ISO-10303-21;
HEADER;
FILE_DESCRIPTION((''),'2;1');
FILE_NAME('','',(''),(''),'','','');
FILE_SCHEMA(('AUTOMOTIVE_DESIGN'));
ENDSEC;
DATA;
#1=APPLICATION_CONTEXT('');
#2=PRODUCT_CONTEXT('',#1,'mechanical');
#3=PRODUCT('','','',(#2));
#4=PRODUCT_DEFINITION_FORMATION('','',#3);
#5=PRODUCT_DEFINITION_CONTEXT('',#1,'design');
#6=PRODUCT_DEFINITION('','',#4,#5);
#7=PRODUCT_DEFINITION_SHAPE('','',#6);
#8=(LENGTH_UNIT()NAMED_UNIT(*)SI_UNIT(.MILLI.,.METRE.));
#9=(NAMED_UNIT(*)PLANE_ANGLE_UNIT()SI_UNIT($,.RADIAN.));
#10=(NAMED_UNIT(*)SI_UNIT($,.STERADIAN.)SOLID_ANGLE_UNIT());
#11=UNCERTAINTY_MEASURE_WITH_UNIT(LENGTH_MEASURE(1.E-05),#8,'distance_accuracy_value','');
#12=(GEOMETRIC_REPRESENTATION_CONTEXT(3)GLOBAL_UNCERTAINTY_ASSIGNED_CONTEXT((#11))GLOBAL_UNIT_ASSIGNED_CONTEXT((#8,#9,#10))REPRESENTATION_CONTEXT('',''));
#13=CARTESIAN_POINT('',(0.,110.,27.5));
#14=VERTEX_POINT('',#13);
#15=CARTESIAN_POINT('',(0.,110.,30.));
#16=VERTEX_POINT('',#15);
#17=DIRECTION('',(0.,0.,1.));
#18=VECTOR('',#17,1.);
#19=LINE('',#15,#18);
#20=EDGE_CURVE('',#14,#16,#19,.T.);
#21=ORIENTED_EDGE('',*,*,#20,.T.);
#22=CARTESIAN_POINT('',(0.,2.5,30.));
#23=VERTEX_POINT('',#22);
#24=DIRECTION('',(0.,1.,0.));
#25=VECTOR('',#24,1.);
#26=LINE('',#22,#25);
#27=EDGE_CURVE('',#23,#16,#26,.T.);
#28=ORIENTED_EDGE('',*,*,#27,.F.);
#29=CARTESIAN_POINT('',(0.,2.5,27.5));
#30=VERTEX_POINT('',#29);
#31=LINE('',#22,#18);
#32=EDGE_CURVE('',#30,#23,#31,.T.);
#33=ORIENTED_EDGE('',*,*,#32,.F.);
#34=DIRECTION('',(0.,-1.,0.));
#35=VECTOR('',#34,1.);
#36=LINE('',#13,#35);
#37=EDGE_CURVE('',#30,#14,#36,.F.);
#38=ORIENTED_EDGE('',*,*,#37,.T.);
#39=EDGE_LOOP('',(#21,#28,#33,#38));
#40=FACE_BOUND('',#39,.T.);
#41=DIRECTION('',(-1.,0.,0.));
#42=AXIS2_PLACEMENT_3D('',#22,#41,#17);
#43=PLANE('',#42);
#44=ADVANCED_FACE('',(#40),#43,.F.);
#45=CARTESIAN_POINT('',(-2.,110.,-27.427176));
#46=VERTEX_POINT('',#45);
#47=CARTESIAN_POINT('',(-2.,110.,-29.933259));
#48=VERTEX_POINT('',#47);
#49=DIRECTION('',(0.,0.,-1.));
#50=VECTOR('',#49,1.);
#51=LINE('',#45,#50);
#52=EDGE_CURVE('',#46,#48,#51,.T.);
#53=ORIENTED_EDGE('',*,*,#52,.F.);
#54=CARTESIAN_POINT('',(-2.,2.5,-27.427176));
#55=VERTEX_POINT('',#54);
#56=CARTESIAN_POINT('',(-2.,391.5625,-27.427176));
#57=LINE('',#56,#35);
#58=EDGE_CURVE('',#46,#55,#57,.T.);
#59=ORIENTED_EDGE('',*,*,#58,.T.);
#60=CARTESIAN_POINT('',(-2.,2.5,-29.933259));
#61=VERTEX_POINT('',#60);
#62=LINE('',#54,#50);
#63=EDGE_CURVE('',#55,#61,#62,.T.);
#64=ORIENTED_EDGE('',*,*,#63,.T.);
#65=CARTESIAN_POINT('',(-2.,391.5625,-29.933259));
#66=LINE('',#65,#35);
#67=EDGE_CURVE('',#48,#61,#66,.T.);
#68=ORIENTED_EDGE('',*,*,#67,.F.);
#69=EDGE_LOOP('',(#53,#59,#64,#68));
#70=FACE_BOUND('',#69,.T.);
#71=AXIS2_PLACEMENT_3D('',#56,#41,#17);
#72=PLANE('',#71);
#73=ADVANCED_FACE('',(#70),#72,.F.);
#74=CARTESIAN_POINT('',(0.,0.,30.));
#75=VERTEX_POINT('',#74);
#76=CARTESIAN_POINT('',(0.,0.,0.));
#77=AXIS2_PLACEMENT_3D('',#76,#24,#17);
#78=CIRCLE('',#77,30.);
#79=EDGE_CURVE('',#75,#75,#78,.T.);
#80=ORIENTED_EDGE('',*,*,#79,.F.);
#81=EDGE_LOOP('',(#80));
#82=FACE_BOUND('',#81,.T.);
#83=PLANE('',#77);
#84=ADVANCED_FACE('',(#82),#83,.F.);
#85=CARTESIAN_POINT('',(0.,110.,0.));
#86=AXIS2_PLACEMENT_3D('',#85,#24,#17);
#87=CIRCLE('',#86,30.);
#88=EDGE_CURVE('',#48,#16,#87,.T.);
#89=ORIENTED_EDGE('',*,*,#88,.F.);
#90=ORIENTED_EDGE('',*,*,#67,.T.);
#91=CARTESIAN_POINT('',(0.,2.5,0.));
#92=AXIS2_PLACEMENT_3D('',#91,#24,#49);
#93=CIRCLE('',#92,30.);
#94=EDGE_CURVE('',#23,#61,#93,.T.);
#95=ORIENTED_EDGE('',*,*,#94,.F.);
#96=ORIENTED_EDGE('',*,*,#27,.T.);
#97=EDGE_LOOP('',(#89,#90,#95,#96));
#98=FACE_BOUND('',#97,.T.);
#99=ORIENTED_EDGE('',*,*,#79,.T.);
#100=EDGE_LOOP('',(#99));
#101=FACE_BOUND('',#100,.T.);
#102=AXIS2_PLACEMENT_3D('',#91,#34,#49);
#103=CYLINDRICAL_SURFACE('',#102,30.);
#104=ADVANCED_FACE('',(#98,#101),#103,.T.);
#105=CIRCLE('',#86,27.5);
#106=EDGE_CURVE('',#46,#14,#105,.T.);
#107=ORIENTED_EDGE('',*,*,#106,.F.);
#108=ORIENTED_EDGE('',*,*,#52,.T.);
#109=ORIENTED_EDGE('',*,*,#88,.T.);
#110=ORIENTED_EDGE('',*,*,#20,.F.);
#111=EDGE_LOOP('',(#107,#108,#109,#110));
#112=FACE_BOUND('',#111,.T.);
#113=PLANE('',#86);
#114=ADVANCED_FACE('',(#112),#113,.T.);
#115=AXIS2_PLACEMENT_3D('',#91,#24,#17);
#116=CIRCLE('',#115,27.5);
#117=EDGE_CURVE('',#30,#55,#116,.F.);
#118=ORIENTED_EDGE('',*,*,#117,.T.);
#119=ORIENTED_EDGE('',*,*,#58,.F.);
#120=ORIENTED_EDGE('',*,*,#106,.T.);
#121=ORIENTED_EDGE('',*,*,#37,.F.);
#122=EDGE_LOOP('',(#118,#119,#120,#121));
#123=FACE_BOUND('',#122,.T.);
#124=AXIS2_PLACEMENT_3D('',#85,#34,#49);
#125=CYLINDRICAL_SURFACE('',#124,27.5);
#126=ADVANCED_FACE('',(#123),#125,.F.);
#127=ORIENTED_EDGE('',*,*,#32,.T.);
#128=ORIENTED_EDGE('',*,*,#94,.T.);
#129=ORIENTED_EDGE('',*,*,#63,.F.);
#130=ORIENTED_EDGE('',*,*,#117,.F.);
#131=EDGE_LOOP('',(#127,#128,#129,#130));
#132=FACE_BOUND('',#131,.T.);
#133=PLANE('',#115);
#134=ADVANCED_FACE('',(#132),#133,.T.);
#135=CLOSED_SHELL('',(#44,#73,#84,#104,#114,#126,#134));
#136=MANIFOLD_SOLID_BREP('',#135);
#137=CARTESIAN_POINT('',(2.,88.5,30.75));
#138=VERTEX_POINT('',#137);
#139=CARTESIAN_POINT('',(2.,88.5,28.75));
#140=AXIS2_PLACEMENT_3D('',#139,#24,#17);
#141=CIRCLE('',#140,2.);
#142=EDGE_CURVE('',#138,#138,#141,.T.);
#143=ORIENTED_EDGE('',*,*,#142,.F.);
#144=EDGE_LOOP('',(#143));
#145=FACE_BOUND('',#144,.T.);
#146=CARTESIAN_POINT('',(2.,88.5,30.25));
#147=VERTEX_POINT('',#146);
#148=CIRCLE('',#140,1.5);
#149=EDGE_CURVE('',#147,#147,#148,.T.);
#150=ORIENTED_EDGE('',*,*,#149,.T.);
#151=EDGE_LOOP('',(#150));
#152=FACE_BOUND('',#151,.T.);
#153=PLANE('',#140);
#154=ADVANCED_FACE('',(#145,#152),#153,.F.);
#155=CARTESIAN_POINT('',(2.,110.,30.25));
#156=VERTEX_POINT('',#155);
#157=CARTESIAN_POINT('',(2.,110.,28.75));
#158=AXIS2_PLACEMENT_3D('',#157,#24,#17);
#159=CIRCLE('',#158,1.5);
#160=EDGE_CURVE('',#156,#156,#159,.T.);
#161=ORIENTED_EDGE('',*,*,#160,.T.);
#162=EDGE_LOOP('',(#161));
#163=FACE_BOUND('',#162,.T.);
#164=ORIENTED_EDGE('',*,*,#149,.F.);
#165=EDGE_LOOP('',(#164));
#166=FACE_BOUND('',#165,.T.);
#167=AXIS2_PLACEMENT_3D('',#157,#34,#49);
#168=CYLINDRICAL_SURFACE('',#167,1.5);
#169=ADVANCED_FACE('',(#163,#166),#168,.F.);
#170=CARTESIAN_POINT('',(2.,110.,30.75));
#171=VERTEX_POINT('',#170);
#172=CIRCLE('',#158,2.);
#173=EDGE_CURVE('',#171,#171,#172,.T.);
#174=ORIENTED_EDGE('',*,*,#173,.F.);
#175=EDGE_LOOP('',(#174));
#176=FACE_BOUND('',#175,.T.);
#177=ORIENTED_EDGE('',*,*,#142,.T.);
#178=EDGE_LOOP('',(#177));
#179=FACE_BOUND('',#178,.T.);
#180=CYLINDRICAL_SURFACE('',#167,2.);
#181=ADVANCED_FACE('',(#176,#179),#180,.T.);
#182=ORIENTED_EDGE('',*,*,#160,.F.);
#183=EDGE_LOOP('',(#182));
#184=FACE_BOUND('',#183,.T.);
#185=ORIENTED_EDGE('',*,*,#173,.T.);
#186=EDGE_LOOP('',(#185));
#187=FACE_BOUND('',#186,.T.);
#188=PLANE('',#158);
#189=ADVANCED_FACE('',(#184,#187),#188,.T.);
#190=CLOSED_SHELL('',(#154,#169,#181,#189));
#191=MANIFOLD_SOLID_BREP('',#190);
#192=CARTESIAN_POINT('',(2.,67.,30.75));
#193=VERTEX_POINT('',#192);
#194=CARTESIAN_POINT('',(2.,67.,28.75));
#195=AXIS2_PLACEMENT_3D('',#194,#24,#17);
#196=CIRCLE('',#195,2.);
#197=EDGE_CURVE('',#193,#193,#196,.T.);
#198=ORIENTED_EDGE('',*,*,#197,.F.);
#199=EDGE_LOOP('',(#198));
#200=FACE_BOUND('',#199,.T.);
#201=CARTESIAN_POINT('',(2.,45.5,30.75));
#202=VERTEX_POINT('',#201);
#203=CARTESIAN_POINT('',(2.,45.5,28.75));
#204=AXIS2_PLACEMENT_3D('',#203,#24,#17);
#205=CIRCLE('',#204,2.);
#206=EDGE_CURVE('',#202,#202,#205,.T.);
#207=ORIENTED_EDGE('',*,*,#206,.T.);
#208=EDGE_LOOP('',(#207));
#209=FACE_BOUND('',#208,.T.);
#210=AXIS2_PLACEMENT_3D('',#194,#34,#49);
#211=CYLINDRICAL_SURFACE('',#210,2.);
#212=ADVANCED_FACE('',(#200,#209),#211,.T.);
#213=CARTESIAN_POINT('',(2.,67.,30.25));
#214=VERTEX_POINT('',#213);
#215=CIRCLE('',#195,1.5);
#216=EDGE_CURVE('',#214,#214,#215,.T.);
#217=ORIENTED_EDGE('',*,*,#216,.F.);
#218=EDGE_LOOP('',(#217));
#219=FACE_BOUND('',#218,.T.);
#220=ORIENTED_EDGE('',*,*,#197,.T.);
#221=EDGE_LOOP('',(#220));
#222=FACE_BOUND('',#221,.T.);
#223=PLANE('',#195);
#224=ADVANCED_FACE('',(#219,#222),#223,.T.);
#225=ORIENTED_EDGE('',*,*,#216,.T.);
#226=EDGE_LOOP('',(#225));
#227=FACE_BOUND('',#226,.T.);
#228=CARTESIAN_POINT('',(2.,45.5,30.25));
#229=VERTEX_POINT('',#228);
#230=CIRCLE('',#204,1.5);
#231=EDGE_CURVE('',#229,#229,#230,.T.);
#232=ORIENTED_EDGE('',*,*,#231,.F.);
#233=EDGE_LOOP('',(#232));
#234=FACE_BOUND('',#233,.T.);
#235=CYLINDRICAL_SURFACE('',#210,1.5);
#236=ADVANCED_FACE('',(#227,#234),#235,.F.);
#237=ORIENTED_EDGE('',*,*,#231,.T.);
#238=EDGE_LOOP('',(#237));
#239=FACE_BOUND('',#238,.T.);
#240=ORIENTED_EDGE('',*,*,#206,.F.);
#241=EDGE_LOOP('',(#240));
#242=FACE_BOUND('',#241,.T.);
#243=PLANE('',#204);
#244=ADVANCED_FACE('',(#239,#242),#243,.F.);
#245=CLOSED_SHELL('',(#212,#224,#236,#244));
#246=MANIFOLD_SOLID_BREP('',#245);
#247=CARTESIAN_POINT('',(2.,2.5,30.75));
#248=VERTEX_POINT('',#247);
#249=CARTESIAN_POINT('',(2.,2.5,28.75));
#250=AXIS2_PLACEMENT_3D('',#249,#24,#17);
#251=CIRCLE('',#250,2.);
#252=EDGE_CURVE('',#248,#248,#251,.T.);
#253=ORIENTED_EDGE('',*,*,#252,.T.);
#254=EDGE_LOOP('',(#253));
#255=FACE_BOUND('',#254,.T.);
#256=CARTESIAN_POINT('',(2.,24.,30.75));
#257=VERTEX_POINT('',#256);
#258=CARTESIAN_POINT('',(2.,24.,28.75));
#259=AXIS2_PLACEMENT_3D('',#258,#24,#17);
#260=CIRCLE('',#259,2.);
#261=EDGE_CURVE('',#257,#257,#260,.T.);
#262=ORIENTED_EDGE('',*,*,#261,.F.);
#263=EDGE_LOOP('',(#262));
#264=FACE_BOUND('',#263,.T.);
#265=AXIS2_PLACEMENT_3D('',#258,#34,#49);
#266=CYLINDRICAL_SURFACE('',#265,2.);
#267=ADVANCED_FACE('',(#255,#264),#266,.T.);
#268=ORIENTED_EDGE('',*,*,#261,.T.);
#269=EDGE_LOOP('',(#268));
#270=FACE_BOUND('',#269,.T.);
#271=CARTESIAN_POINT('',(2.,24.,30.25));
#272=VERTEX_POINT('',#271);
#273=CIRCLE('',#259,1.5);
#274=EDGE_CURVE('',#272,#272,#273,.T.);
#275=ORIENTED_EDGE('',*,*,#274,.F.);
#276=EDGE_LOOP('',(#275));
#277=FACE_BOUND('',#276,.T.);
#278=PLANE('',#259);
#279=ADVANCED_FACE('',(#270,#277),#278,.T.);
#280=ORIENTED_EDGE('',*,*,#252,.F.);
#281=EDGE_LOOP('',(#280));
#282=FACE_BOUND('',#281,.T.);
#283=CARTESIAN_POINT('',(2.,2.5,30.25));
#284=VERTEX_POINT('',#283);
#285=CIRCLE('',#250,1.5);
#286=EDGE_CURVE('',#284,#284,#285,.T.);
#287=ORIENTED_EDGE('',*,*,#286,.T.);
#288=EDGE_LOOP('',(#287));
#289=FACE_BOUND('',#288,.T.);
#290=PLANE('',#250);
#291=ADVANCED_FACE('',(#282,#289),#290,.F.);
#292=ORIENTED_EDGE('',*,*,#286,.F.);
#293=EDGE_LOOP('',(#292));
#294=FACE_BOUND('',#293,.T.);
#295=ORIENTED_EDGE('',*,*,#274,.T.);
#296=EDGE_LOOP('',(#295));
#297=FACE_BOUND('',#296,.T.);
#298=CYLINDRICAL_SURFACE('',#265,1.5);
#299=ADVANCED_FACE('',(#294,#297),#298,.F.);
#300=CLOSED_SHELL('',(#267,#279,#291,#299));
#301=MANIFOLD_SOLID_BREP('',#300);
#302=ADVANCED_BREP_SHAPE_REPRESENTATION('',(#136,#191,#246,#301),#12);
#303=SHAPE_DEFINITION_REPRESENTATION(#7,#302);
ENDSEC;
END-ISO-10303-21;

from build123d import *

# Parameters (mm, degrees)
SKETCH1_R           = 30
BOSS_EXTRUDE1_DEPTH = 2.5
SKETCH2_R           = 30
SKETCH2_R_2         = 27.5
BOSS_EXTRUDE2_DEPTH = 107.5
CUT_EXTRUDE1_START  = -107.5
CUT_EXTRUDE1_DEPTH  = 107.5
SKETCH6_R           = 2
SKETCH6_R_2         = 1.5
BOSS_EXTRUDE9_DEPTH = 21.5
LPATTERN1_COUNT     = 3
LPATTERN1_PITCH     = 43
CUT_EXTRUDE2_START  = -107.5
CUT_EXTRUDE2_DEPTH  = 107.5


# Read off the part's stored shape, not the designer's step: Cut-Extrude2
with BuildPart() as part:
    # Sketch1 → Boss-Extrude1 (new body)
    with BuildSketch(Plane(origin=(0, 0, 0), x_dir=(1, 0, 0), z_dir=(0, 1, 0))):
        with Locations(Location((0, 0, 0), (0, 0, 270))):
            Circle(SKETCH1_R)
    extrude(amount=BOSS_EXTRUDE1_DEPTH)

    # Sketch2 → Boss-Extrude2 (add)
    with BuildSketch(Plane(origin=(0, 2.5, 0), x_dir=(1, 0, 0), z_dir=(0, 1, 0))):
        with Locations(Location((0, 0, 0), (0, 0, 270))):
            Circle(SKETCH2_R)
        with Locations(Location((0, 0, 0), (0, 0, 270))):
            Circle(SKETCH2_R_2, mode=Mode.SUBTRACT)
    extrude(amount=BOSS_EXTRUDE2_DEPTH)

    # Sketch3 → Cut-Extrude1 (cut)
    with BuildSketch(Plane(origin=(0, 110, 0), x_dir=(1, 0, 0), z_dir=(0, 1, 0)).offset(CUT_EXTRUDE1_START)):
        with BuildLine():
            Line((0, -30), (0, 30))
            ThreePointArc((0, 30), (30, 0), (0, -30))
        make_face()
    extrude(amount=CUT_EXTRUDE1_DEPTH, mode=Mode.SUBTRACT)

    # Cut-Extrude2 outline → Cut-Extrude2 (cut)
    with BuildSketch(Plane(origin=(0, 110, 0), x_dir=(1, 0, 0), z_dir=(0, 1, 0)).offset(CUT_EXTRUDE2_START)):
        with BuildLine():
            ThreePointArc((0, 30), (-1.000556639, 29.983310131), (-2, 29.933259094))
            Line((-2, 29.933259094), (-2, 27.427176304))
            ThreePointArc((-2, 27.427176304), (-1.000662692, 27.481788045), (0, 27.5))
            Line((0, 27.5), (0, 30))
        make_face()
    extrude(amount=CUT_EXTRUDE2_DEPTH, mode=Mode.SUBTRACT)


with BuildPart() as body_2:
    # Sketch6 → Boss-Extrude9 (new body)
    with BuildSketch(Plane(origin=(0, 2.5, 0), x_dir=(1, 0, 0), z_dir=(0, 1, 0))):
        with Locations(Location((2, -28.75, 0), (0, 0, 270))):
            Circle(SKETCH6_R)
        with Locations(Location((2, -28.75, 0), (0, 0, 270))):
            Circle(SKETCH6_R_2, mode=Mode.SUBTRACT)
    boss_extrude9 = extrude(amount=BOSS_EXTRUDE9_DEPTH)


with BuildPart() as lpattern1_1:
    # LPattern1: Boss-Extrude9 ×3
    with Locations(*[(0, i * LPATTERN1_PITCH, 0) for i in range(1, LPATTERN1_COUNT)]):
        add(boss_extrude9)


solid = Compound([part.part, body_2.part, lpattern1_1.part])
